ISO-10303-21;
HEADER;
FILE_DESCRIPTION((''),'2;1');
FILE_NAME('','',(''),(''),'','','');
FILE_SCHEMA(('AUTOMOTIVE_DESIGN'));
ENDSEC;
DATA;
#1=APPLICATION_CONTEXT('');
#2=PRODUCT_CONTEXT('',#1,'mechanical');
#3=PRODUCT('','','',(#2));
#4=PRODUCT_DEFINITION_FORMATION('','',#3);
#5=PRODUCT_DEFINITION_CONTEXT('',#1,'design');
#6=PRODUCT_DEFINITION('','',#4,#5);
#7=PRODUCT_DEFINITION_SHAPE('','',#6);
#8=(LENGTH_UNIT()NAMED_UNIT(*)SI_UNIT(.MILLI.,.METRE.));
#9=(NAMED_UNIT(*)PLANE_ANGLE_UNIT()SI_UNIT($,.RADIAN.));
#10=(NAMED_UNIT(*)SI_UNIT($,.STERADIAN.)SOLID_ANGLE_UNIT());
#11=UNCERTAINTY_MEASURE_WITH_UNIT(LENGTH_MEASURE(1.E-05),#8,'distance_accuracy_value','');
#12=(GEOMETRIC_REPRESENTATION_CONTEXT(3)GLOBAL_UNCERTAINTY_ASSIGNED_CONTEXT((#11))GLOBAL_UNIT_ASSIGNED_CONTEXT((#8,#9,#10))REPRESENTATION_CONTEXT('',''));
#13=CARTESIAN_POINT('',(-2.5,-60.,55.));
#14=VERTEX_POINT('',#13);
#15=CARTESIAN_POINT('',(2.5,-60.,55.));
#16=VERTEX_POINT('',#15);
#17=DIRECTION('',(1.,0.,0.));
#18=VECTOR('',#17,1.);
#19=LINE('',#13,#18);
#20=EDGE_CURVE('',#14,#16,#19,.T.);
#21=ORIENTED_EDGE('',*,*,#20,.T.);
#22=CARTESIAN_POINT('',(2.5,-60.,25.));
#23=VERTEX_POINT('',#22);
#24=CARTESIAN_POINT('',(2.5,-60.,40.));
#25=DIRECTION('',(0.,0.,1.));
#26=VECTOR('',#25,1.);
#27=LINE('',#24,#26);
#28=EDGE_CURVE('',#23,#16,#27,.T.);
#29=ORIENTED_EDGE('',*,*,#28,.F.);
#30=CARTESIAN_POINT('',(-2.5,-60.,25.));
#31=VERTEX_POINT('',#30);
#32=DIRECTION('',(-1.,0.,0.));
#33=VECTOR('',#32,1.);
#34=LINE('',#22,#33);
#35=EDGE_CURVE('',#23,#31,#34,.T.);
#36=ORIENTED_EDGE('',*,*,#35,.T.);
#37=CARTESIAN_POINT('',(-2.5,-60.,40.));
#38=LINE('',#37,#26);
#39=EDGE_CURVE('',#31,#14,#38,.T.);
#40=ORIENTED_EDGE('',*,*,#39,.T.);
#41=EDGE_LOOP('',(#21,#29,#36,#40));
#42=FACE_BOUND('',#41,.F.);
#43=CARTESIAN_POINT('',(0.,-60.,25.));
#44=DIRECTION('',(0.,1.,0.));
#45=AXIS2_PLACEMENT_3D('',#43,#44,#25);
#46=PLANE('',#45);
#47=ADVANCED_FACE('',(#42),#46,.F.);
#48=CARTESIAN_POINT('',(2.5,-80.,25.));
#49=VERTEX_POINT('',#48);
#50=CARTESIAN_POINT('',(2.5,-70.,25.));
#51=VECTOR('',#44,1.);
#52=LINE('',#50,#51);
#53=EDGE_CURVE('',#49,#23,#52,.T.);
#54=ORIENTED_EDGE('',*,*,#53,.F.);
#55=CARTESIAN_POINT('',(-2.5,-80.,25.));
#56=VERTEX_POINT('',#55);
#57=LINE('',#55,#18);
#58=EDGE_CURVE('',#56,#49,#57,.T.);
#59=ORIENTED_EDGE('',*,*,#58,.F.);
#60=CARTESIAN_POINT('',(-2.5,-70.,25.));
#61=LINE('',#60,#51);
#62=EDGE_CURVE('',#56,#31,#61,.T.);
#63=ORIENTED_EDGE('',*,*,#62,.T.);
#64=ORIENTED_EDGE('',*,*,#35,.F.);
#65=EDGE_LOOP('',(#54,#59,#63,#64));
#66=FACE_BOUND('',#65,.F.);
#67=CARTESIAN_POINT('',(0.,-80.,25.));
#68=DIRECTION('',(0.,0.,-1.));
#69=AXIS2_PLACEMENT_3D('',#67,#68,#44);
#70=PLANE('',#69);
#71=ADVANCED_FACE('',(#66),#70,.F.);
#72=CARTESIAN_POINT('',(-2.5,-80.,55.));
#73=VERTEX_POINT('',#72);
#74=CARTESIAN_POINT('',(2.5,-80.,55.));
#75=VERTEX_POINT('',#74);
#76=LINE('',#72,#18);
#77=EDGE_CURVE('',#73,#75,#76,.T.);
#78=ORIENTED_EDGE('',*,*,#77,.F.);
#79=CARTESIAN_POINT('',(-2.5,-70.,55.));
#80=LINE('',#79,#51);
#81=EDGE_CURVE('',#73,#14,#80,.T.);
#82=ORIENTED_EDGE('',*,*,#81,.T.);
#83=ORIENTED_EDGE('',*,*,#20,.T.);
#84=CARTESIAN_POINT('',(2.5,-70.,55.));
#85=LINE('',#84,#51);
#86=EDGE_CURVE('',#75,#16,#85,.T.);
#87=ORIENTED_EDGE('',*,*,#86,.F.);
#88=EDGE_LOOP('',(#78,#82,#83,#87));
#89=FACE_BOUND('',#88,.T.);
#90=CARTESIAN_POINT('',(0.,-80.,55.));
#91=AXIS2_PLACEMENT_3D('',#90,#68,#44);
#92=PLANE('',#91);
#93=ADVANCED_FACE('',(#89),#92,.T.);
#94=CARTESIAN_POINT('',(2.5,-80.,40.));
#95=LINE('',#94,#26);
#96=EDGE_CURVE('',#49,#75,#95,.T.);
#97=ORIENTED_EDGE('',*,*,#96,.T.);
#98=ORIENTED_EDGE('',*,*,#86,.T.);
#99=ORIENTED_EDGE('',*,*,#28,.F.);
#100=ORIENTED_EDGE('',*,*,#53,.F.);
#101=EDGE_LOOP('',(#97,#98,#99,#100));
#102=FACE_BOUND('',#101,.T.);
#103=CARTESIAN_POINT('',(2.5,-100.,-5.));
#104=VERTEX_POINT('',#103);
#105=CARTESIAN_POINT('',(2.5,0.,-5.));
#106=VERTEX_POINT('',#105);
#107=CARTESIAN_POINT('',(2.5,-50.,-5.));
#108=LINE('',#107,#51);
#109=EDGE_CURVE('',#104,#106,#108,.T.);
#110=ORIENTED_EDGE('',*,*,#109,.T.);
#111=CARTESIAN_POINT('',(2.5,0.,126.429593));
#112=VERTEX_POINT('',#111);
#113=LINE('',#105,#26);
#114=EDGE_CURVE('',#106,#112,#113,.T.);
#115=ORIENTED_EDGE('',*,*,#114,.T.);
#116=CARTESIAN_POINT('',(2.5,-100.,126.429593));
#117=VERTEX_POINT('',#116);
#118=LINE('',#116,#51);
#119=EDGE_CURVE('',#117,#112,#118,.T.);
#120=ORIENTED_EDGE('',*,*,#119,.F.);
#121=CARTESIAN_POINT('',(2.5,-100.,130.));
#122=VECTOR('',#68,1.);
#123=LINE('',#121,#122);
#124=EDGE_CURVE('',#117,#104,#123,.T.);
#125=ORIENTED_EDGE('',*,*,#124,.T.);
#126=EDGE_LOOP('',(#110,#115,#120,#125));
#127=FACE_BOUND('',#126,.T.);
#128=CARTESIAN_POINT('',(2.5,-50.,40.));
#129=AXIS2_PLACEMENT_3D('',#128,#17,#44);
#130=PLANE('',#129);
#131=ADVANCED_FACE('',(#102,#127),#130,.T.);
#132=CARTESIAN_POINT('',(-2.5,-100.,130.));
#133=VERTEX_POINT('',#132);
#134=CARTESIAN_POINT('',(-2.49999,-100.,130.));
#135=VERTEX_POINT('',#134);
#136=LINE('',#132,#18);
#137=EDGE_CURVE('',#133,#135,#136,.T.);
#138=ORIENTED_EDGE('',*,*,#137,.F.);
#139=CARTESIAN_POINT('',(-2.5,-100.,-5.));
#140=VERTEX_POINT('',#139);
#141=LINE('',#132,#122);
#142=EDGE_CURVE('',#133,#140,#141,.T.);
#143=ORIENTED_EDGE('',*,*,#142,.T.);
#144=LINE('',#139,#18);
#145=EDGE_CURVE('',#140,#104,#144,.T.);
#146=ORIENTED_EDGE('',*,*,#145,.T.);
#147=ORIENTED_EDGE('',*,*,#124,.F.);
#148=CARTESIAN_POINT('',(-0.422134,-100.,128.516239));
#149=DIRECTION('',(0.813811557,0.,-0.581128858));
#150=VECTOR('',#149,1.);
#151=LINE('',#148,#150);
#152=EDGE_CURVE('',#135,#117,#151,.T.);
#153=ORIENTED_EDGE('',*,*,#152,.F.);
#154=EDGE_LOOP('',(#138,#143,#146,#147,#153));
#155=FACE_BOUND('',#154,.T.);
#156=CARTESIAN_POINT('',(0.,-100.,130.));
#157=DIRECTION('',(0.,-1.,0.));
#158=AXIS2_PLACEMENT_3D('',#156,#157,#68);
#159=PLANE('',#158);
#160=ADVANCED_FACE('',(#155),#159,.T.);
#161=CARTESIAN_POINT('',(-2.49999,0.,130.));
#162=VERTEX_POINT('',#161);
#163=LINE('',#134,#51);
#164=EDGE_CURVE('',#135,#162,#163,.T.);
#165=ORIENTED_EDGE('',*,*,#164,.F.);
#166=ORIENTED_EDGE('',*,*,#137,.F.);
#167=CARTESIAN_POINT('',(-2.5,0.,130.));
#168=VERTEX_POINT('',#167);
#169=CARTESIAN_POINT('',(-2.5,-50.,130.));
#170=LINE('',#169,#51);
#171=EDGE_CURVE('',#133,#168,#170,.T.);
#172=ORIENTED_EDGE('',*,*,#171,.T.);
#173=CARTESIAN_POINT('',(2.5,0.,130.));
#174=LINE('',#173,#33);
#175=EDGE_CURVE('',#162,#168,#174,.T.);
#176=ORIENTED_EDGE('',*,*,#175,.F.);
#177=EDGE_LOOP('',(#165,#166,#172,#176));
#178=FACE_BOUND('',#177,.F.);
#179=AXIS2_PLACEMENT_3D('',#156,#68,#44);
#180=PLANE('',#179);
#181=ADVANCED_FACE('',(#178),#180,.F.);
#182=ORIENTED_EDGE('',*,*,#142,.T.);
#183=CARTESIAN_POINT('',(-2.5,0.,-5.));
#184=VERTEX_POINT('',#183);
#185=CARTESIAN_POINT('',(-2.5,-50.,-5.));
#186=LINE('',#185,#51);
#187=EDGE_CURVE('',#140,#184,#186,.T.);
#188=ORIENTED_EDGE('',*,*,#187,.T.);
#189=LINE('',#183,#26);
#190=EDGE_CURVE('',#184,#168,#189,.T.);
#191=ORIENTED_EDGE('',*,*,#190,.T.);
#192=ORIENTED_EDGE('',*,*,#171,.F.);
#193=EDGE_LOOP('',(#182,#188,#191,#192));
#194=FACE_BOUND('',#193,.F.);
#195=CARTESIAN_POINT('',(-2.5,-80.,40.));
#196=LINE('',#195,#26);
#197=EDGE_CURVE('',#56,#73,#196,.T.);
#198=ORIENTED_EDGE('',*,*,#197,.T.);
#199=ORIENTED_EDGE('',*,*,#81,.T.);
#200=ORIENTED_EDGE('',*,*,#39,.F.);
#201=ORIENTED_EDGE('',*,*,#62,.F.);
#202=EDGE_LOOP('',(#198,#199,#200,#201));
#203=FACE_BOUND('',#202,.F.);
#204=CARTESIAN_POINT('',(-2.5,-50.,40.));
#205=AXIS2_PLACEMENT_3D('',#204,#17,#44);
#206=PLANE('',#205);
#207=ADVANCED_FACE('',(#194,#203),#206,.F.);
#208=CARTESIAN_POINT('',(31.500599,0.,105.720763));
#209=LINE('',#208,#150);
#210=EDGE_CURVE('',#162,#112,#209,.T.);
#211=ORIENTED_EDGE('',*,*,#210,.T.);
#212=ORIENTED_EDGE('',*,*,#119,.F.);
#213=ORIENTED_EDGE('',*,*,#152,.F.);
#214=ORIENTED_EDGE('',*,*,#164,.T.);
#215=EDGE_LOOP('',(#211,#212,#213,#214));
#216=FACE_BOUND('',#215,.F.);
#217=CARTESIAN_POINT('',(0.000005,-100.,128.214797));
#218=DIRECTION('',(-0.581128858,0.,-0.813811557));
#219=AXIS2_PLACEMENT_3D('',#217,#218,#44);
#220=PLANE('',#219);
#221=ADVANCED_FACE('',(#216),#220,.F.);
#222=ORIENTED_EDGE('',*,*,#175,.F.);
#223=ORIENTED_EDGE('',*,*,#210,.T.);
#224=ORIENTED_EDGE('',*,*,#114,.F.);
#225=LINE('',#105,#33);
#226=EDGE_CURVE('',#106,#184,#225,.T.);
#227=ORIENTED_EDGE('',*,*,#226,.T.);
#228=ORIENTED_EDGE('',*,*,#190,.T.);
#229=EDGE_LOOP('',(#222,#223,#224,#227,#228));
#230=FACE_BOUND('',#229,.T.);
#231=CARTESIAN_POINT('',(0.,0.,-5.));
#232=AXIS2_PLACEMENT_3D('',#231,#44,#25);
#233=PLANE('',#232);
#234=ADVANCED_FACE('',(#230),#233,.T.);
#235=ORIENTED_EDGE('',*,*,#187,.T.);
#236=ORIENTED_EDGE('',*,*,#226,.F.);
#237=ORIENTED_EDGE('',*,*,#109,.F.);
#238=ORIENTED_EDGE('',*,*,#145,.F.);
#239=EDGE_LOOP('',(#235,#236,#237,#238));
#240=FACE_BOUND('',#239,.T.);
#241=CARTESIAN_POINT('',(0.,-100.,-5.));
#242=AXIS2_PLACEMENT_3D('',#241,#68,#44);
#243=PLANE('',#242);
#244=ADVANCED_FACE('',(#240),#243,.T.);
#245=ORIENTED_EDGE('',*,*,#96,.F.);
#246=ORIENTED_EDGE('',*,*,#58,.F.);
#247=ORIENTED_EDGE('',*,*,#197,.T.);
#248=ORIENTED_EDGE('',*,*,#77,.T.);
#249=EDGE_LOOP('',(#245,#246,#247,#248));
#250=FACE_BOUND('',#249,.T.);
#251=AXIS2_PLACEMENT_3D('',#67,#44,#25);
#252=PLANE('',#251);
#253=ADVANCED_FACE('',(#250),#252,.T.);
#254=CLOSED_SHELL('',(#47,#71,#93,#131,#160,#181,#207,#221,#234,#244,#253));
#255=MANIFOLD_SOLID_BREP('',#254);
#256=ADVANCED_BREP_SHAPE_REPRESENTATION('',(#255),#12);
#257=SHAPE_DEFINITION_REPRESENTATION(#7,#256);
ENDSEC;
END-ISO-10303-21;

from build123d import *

# Parameters (mm, degrees)
F0_W     = 100
F0_H     = 80
F0_W_2   = 20
F0_H_2   = 30
F0_H_3   = 50
F0_H_4   = 5
F1_DEPTH = 2.5
F2_SIZE2 = 3.570407
F2_SIZE  = 4.99999


# Not quite as in the source:
# - a fillet or chamfer is up to 0.001 mm smaller than in the source, because OpenCascade refuses the exact size


with BuildPart() as f1:
    # F0 (on Right) → F1 (new body, symmetric)
    with BuildSketch(Plane.YZ):
        with Locations((-50, 40)):
            Rectangle(F0_W, F0_H)
        with Locations((-70, 40)):
            Rectangle(F0_W_2, F0_H_2, mode=Mode.SUBTRACT)
        with Locations((-50, 105)):
            Rectangle(F0_W, F0_H_3)
        with Locations((-50, -2.5)):
            Rectangle(F0_W, F0_H_4)
    extrude(amount=F1_DEPTH, both=True)

    # F2 (size 5 and 3.5704168108 in the source; OpenCascade refuses exactly that, so slightly less here)
    f2_edges = [f1.edges().sort_by_distance(p)[0] for p in [
        (2.5, -50, 130),
    ]]
    f2_side = f1.faces().sort_by_distance((0, -50, 130))[0]
    chamfer(f2_edges, length=F2_SIZE, length2=F2_SIZE2, reference=f2_side)


solid = f1.part
